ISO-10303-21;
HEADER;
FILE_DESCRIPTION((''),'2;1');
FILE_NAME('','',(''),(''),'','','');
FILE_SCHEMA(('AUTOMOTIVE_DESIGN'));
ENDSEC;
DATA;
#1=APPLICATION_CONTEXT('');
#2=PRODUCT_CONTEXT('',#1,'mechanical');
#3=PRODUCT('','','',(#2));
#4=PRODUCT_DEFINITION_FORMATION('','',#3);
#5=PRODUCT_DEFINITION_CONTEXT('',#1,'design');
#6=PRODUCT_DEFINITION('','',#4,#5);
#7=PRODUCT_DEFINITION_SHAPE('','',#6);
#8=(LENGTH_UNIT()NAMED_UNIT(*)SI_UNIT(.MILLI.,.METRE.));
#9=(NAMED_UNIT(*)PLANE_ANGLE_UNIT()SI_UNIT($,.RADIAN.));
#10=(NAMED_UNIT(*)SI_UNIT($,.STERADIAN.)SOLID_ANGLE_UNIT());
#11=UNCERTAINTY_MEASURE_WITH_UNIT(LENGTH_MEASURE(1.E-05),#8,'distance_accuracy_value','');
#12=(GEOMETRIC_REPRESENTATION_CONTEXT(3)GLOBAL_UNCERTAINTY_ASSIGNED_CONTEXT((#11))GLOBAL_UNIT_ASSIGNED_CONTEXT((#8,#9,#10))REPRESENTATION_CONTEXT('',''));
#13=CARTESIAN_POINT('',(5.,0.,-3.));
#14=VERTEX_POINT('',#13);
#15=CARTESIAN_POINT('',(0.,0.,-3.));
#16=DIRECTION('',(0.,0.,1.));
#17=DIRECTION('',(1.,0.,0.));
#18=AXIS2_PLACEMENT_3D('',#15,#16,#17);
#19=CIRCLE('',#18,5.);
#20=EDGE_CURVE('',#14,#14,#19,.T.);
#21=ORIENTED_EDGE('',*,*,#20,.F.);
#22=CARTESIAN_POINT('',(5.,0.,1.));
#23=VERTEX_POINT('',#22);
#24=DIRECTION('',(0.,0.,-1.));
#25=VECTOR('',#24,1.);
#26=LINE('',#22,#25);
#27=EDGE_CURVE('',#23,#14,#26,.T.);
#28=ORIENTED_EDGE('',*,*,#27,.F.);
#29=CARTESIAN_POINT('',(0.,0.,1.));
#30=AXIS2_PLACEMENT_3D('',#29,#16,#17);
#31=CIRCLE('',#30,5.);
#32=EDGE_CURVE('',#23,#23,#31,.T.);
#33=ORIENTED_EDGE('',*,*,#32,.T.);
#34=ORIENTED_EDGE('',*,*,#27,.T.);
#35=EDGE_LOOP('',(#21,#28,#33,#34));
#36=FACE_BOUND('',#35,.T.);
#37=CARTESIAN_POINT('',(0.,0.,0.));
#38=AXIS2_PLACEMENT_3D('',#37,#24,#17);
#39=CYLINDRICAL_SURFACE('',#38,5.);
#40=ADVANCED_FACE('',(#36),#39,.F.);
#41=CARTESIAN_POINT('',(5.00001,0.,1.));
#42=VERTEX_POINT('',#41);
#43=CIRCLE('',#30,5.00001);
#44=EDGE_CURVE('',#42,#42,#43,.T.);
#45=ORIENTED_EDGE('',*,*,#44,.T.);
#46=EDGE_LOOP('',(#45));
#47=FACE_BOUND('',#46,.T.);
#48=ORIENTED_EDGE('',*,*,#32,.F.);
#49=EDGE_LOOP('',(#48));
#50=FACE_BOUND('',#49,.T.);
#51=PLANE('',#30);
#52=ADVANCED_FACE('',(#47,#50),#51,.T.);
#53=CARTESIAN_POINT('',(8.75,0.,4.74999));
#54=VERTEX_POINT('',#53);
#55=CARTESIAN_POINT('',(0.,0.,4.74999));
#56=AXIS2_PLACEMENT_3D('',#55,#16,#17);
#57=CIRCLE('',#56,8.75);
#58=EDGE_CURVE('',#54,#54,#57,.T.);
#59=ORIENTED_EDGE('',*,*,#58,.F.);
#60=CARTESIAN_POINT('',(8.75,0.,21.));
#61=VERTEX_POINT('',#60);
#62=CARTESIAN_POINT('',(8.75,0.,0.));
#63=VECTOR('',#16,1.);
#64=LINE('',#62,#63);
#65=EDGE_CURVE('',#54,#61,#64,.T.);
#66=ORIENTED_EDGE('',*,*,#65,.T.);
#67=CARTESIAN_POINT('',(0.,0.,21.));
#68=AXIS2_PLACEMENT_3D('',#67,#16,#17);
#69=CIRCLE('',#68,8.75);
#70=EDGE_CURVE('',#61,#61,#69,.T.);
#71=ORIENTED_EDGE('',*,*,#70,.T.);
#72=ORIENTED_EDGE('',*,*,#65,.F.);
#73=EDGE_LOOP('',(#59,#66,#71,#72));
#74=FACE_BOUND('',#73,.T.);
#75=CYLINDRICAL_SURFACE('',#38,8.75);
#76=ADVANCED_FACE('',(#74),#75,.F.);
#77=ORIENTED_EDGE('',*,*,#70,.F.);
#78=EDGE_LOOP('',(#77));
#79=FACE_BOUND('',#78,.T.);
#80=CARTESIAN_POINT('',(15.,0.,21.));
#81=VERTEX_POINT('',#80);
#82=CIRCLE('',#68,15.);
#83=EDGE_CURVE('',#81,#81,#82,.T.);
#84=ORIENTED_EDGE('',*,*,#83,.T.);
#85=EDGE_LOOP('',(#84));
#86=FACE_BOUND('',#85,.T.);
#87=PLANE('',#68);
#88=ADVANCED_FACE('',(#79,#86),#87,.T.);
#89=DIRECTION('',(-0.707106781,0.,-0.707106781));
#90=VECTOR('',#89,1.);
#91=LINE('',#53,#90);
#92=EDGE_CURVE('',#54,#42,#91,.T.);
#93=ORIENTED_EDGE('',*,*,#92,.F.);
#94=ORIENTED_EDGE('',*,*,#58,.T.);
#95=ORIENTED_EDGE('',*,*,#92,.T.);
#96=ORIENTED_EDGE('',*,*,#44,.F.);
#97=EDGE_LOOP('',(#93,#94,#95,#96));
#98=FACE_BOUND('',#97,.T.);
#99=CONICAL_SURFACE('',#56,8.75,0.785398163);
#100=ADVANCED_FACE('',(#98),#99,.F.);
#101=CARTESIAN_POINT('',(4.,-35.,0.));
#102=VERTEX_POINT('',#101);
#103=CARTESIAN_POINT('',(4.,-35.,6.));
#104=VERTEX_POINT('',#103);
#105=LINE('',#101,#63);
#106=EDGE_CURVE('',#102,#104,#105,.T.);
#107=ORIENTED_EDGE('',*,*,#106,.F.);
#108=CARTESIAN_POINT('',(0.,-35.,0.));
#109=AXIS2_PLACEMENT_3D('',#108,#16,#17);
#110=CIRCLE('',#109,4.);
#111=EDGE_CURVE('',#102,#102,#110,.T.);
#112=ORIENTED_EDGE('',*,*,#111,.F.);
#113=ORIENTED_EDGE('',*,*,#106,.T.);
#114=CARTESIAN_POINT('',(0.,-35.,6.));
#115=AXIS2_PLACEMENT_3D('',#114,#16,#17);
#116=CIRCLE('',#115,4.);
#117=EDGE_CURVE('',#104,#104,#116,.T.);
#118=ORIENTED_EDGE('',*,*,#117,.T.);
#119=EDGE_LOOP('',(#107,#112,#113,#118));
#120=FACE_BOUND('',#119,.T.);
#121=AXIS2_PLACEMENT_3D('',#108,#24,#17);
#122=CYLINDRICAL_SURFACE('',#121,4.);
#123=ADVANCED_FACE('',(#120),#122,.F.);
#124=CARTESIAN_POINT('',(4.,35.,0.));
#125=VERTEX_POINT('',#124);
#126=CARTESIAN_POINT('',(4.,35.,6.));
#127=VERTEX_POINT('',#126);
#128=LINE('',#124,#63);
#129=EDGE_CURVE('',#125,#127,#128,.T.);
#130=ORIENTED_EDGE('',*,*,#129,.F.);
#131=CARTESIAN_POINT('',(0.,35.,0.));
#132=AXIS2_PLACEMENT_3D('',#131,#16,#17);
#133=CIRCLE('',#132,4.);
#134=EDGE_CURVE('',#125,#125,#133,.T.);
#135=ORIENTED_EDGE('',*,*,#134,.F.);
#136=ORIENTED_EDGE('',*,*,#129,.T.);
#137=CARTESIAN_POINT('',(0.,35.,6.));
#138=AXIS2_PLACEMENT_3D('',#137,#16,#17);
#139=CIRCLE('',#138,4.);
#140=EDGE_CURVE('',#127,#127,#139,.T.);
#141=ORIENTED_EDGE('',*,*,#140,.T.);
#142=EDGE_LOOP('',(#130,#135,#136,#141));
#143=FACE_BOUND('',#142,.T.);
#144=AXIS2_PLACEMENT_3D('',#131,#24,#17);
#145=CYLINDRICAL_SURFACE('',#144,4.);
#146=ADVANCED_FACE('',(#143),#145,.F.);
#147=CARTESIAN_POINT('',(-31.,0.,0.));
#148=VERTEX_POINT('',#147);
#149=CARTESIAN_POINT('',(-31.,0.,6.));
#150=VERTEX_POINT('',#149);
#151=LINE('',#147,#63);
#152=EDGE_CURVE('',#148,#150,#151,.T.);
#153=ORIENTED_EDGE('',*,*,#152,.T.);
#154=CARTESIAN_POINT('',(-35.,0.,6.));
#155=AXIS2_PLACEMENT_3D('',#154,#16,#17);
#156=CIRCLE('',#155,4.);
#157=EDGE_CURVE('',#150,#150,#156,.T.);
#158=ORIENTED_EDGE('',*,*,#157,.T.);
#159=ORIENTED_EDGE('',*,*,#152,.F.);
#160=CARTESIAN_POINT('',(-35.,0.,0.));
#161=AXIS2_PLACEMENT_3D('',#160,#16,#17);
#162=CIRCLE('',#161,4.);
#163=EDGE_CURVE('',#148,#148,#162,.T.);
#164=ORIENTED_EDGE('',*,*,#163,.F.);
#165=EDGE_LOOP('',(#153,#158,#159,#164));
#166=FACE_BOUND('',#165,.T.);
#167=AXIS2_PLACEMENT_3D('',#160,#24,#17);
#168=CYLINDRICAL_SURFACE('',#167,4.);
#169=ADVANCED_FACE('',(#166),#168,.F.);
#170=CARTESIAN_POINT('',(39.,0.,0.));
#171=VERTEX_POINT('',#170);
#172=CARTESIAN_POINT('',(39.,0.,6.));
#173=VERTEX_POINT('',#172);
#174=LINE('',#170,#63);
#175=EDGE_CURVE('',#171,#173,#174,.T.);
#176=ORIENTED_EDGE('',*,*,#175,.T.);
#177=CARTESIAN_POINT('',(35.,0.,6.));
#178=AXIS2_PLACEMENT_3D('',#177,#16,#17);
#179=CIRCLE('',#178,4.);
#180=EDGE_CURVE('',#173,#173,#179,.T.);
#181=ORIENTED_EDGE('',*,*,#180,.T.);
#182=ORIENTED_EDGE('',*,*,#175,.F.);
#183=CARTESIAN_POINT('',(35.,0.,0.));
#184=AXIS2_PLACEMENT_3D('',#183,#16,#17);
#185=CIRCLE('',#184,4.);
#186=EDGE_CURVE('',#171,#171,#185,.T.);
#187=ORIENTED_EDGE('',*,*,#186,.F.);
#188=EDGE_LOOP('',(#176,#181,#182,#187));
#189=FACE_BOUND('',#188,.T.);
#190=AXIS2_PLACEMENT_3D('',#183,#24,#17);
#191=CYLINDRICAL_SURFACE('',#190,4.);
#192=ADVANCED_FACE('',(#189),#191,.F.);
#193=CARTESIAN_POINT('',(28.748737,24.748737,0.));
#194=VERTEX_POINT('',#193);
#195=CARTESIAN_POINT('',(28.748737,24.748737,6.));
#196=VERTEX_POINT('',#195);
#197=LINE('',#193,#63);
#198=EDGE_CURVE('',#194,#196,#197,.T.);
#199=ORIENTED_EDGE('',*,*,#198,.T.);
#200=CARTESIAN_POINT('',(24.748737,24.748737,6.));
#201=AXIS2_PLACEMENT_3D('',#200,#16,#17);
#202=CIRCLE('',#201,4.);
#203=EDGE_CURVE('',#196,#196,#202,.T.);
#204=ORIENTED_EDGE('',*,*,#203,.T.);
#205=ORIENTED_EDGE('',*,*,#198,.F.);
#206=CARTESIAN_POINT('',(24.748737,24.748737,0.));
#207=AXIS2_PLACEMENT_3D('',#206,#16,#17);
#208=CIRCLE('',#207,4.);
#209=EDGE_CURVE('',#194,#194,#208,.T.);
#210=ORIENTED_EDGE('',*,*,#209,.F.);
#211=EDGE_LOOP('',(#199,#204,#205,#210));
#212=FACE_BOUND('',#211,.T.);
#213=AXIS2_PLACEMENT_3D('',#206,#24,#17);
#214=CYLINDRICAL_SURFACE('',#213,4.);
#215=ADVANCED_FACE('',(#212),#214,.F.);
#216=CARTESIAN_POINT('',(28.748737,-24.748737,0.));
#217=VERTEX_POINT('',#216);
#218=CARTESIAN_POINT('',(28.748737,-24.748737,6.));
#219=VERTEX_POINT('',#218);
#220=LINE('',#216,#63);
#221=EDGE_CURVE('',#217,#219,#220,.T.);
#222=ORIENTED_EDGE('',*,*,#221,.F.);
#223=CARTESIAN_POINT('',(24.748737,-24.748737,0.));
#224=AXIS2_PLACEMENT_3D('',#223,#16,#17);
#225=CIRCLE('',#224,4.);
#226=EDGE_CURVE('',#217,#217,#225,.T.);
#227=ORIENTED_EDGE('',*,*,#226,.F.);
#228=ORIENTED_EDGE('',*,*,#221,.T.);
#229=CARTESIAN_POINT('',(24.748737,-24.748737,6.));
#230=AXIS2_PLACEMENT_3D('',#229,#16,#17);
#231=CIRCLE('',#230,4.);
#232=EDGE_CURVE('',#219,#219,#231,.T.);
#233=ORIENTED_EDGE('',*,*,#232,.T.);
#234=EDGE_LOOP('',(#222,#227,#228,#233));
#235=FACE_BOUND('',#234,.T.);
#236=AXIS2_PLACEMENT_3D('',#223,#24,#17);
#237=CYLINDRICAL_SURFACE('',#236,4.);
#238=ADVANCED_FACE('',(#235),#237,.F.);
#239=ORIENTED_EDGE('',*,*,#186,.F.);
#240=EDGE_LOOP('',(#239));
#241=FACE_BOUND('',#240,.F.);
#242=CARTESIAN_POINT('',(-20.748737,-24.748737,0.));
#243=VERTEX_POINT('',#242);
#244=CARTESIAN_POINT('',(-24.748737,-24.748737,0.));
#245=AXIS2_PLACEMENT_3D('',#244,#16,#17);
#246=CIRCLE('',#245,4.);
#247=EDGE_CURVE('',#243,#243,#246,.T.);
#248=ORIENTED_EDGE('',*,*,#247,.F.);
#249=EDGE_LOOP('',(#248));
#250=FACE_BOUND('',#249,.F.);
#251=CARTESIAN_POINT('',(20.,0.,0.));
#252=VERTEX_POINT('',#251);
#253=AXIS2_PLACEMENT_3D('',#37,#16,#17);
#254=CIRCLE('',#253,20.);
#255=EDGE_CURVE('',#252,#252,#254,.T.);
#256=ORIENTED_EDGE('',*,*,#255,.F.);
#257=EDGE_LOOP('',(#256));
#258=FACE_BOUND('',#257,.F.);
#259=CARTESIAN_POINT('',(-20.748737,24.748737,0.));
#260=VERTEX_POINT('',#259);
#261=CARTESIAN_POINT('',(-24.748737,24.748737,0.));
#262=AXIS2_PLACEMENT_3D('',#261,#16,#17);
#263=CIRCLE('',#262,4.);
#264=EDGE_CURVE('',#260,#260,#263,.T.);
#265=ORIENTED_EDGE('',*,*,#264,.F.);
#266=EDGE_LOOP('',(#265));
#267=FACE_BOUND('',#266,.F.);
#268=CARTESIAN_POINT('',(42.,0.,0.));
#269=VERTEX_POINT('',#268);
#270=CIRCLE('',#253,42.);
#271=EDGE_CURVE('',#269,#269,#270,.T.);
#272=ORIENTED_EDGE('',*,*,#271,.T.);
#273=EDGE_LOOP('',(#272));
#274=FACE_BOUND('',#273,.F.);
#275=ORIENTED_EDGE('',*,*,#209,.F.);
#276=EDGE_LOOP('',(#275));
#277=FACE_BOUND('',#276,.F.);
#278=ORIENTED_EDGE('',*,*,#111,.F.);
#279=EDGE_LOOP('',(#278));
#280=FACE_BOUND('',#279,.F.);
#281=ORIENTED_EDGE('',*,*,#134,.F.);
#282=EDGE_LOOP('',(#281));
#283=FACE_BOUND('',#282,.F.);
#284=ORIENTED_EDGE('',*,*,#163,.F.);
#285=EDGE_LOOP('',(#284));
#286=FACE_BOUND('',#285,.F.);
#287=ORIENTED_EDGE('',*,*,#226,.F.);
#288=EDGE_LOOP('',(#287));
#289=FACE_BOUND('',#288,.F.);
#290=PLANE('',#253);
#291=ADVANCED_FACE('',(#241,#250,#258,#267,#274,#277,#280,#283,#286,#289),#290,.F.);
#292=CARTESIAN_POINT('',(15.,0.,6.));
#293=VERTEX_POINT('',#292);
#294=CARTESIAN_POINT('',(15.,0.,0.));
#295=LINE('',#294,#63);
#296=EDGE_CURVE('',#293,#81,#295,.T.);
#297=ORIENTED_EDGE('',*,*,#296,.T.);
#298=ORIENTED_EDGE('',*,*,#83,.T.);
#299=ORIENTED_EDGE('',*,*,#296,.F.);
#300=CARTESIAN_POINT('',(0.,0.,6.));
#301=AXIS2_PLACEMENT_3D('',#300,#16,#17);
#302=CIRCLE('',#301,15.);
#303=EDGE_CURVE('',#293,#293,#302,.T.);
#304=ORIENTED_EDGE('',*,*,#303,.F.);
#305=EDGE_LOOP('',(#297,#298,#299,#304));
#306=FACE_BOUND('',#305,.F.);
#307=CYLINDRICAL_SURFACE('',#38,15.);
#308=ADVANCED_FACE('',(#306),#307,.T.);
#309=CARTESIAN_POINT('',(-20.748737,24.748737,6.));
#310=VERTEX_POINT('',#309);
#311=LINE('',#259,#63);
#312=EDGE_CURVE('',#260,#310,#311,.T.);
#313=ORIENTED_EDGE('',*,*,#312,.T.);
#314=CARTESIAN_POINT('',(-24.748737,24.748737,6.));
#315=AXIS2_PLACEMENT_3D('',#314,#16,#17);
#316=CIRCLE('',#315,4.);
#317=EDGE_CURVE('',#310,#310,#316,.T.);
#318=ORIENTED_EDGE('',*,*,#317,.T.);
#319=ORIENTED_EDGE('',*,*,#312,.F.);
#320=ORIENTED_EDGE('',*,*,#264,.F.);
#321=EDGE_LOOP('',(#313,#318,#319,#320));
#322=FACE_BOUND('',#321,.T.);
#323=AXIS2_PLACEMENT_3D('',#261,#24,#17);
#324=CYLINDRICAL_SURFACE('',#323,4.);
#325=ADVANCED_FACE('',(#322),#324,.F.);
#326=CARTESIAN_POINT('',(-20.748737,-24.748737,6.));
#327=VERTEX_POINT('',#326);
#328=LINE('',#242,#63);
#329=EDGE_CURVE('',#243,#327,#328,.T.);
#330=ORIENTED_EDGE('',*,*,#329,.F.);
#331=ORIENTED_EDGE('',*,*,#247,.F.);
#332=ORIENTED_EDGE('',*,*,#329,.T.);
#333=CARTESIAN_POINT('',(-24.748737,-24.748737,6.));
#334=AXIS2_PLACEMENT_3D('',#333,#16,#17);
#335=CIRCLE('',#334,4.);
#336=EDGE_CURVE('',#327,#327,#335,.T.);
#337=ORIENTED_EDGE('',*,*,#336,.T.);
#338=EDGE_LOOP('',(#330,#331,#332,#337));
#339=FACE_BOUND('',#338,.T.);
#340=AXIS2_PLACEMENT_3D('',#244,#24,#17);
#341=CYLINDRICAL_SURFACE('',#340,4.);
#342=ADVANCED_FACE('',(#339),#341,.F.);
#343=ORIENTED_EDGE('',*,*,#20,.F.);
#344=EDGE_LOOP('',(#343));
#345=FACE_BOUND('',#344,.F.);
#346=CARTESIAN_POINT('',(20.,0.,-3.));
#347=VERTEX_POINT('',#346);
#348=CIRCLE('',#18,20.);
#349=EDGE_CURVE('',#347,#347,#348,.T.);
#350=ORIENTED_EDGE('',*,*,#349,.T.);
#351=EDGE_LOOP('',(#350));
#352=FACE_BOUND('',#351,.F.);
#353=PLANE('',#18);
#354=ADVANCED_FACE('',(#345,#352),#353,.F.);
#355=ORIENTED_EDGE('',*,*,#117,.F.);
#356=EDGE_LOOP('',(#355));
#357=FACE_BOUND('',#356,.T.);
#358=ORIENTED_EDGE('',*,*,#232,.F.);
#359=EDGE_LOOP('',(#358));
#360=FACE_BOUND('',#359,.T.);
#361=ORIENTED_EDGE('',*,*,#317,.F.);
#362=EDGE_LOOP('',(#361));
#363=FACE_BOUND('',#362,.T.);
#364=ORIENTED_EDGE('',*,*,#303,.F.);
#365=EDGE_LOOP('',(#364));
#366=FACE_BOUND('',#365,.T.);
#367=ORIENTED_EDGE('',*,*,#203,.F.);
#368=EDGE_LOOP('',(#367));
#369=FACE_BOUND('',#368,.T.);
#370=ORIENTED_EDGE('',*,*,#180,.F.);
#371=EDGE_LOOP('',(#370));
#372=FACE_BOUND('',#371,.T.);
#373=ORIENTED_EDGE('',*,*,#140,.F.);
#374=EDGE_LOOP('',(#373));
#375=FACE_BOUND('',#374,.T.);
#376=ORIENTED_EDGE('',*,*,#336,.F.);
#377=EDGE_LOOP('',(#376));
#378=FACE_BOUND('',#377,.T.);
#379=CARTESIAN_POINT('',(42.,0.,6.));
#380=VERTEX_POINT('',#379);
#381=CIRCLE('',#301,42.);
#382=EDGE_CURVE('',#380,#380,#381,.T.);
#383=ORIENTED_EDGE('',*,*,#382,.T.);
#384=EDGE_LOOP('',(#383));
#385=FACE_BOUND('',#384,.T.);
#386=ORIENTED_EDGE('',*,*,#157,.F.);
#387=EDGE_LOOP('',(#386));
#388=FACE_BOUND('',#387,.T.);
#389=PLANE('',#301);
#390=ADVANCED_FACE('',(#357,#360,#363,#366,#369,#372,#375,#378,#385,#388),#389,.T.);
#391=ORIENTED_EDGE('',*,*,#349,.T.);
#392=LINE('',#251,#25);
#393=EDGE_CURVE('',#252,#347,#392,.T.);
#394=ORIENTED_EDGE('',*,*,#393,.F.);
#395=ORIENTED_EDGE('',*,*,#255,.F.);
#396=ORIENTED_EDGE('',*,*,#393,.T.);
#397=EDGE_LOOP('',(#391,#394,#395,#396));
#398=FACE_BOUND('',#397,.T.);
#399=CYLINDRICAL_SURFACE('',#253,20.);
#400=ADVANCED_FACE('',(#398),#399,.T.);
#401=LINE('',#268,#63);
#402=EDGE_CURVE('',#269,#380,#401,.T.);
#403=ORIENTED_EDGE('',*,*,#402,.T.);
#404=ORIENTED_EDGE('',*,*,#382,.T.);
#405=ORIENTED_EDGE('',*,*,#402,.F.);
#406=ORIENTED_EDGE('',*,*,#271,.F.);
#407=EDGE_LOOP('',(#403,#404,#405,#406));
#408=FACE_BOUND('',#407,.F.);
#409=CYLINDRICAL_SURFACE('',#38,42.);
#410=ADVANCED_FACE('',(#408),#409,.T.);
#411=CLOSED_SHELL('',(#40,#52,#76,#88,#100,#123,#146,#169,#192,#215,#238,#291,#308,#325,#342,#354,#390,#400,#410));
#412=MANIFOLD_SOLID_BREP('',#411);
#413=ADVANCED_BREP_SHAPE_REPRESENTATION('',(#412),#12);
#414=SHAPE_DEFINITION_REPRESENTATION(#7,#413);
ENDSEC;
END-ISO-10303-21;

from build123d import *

# Parameters (mm, degrees)
F0_R     = 15
F0_R_2   = 8.75
F1_DEPTH = 21
F0_R_3   = 20
F2_DEPTH = 3
F0_R_4   = 42
F0_R_5   = 4
F3_DEPTH = 6
F4_DEPTH = 6
F0_R_6   = 5
F5_DEPTH = 3
F6_DEPTH = 3
F7_DEPTH = 1
F8_SIZE  = 3.74999


# Not quite as in the source:
# - a fillet or chamfer is up to 0.001 mm smaller than in the source, because OpenCascade refuses the exact size


with BuildPart() as f1:
    # F0 (on Top) → F1 (new body)
    with BuildSketch(Plane.XY):
        Circle(F0_R)
        Circle(F0_R_2, mode=Mode.SUBTRACT)
    extrude(amount=F1_DEPTH)

    # F0 (on Top) → F2 (join)
    with BuildSketch(Plane.XY):
        Circle(F0_R_3)
        Circle(F0_R, mode=Mode.SUBTRACT)
    extrude(amount=-F2_DEPTH)

    # F0 (on Top) → F3 (join)
    with BuildSketch(Plane.XY):
        Circle(F0_R_4)
        with Locations((-24.7487373415, -24.7487373415)):
            Circle(F0_R_5, mode=Mode.SUBTRACT)
        with Locations((0, -35)):
            Circle(F0_R_5, mode=Mode.SUBTRACT)
        with Locations((24.7487373415, -24.7487373415)):
            Circle(F0_R_5, mode=Mode.SUBTRACT)
        with Locations((-35, 0)):
            Circle(F0_R_5, mode=Mode.SUBTRACT)
        with Locations((-24.7487373415, 24.7487373415)):
            Circle(F0_R_5, mode=Mode.SUBTRACT)
        Circle(F0_R_3, mode=Mode.SUBTRACT)
        with Locations((35, 0)):
            Circle(F0_R_5, mode=Mode.SUBTRACT)
        with Locations((0, 35)):
            Circle(F0_R_5, mode=Mode.SUBTRACT)
        with Locations((24.7487373415, 24.7487373415)):
            Circle(F0_R_5, mode=Mode.SUBTRACT)
    extrude(amount=F3_DEPTH)

    # F0 (on Top) → F4 (join)
    with BuildSketch(Plane.XY):
        Circle(F0_R_3)
        Circle(F0_R, mode=Mode.SUBTRACT)
    extrude(amount=F4_DEPTH)

    # F0 (on Top) → F5 (join)
    with BuildSketch(Plane.XY):
        Circle(F0_R_2)
        Circle(F0_R_6, mode=Mode.SUBTRACT)
    extrude(amount=-F5_DEPTH)

    # F0 (on Top) → F6 (join)
    with BuildSketch(Plane.XY):
        Circle(F0_R)
        Circle(F0_R_2, mode=Mode.SUBTRACT)
    extrude(amount=-F6_DEPTH)

    # F0 (on Top) → F7 (join)
    with BuildSketch(Plane.XY):
        Circle(F0_R_2)
        Circle(F0_R_6, mode=Mode.SUBTRACT)
    extrude(amount=F7_DEPTH)

    # F8 (size 3.75 in the source; OpenCascade refuses exactly that, so slightly less here)
    f8_edges = [f1.edges().sort_by_distance(p)[0] for p in [
        (-8.75, 0, 1),
    ]]
    chamfer(f8_edges, length=F8_SIZE)


solid = f1.part
